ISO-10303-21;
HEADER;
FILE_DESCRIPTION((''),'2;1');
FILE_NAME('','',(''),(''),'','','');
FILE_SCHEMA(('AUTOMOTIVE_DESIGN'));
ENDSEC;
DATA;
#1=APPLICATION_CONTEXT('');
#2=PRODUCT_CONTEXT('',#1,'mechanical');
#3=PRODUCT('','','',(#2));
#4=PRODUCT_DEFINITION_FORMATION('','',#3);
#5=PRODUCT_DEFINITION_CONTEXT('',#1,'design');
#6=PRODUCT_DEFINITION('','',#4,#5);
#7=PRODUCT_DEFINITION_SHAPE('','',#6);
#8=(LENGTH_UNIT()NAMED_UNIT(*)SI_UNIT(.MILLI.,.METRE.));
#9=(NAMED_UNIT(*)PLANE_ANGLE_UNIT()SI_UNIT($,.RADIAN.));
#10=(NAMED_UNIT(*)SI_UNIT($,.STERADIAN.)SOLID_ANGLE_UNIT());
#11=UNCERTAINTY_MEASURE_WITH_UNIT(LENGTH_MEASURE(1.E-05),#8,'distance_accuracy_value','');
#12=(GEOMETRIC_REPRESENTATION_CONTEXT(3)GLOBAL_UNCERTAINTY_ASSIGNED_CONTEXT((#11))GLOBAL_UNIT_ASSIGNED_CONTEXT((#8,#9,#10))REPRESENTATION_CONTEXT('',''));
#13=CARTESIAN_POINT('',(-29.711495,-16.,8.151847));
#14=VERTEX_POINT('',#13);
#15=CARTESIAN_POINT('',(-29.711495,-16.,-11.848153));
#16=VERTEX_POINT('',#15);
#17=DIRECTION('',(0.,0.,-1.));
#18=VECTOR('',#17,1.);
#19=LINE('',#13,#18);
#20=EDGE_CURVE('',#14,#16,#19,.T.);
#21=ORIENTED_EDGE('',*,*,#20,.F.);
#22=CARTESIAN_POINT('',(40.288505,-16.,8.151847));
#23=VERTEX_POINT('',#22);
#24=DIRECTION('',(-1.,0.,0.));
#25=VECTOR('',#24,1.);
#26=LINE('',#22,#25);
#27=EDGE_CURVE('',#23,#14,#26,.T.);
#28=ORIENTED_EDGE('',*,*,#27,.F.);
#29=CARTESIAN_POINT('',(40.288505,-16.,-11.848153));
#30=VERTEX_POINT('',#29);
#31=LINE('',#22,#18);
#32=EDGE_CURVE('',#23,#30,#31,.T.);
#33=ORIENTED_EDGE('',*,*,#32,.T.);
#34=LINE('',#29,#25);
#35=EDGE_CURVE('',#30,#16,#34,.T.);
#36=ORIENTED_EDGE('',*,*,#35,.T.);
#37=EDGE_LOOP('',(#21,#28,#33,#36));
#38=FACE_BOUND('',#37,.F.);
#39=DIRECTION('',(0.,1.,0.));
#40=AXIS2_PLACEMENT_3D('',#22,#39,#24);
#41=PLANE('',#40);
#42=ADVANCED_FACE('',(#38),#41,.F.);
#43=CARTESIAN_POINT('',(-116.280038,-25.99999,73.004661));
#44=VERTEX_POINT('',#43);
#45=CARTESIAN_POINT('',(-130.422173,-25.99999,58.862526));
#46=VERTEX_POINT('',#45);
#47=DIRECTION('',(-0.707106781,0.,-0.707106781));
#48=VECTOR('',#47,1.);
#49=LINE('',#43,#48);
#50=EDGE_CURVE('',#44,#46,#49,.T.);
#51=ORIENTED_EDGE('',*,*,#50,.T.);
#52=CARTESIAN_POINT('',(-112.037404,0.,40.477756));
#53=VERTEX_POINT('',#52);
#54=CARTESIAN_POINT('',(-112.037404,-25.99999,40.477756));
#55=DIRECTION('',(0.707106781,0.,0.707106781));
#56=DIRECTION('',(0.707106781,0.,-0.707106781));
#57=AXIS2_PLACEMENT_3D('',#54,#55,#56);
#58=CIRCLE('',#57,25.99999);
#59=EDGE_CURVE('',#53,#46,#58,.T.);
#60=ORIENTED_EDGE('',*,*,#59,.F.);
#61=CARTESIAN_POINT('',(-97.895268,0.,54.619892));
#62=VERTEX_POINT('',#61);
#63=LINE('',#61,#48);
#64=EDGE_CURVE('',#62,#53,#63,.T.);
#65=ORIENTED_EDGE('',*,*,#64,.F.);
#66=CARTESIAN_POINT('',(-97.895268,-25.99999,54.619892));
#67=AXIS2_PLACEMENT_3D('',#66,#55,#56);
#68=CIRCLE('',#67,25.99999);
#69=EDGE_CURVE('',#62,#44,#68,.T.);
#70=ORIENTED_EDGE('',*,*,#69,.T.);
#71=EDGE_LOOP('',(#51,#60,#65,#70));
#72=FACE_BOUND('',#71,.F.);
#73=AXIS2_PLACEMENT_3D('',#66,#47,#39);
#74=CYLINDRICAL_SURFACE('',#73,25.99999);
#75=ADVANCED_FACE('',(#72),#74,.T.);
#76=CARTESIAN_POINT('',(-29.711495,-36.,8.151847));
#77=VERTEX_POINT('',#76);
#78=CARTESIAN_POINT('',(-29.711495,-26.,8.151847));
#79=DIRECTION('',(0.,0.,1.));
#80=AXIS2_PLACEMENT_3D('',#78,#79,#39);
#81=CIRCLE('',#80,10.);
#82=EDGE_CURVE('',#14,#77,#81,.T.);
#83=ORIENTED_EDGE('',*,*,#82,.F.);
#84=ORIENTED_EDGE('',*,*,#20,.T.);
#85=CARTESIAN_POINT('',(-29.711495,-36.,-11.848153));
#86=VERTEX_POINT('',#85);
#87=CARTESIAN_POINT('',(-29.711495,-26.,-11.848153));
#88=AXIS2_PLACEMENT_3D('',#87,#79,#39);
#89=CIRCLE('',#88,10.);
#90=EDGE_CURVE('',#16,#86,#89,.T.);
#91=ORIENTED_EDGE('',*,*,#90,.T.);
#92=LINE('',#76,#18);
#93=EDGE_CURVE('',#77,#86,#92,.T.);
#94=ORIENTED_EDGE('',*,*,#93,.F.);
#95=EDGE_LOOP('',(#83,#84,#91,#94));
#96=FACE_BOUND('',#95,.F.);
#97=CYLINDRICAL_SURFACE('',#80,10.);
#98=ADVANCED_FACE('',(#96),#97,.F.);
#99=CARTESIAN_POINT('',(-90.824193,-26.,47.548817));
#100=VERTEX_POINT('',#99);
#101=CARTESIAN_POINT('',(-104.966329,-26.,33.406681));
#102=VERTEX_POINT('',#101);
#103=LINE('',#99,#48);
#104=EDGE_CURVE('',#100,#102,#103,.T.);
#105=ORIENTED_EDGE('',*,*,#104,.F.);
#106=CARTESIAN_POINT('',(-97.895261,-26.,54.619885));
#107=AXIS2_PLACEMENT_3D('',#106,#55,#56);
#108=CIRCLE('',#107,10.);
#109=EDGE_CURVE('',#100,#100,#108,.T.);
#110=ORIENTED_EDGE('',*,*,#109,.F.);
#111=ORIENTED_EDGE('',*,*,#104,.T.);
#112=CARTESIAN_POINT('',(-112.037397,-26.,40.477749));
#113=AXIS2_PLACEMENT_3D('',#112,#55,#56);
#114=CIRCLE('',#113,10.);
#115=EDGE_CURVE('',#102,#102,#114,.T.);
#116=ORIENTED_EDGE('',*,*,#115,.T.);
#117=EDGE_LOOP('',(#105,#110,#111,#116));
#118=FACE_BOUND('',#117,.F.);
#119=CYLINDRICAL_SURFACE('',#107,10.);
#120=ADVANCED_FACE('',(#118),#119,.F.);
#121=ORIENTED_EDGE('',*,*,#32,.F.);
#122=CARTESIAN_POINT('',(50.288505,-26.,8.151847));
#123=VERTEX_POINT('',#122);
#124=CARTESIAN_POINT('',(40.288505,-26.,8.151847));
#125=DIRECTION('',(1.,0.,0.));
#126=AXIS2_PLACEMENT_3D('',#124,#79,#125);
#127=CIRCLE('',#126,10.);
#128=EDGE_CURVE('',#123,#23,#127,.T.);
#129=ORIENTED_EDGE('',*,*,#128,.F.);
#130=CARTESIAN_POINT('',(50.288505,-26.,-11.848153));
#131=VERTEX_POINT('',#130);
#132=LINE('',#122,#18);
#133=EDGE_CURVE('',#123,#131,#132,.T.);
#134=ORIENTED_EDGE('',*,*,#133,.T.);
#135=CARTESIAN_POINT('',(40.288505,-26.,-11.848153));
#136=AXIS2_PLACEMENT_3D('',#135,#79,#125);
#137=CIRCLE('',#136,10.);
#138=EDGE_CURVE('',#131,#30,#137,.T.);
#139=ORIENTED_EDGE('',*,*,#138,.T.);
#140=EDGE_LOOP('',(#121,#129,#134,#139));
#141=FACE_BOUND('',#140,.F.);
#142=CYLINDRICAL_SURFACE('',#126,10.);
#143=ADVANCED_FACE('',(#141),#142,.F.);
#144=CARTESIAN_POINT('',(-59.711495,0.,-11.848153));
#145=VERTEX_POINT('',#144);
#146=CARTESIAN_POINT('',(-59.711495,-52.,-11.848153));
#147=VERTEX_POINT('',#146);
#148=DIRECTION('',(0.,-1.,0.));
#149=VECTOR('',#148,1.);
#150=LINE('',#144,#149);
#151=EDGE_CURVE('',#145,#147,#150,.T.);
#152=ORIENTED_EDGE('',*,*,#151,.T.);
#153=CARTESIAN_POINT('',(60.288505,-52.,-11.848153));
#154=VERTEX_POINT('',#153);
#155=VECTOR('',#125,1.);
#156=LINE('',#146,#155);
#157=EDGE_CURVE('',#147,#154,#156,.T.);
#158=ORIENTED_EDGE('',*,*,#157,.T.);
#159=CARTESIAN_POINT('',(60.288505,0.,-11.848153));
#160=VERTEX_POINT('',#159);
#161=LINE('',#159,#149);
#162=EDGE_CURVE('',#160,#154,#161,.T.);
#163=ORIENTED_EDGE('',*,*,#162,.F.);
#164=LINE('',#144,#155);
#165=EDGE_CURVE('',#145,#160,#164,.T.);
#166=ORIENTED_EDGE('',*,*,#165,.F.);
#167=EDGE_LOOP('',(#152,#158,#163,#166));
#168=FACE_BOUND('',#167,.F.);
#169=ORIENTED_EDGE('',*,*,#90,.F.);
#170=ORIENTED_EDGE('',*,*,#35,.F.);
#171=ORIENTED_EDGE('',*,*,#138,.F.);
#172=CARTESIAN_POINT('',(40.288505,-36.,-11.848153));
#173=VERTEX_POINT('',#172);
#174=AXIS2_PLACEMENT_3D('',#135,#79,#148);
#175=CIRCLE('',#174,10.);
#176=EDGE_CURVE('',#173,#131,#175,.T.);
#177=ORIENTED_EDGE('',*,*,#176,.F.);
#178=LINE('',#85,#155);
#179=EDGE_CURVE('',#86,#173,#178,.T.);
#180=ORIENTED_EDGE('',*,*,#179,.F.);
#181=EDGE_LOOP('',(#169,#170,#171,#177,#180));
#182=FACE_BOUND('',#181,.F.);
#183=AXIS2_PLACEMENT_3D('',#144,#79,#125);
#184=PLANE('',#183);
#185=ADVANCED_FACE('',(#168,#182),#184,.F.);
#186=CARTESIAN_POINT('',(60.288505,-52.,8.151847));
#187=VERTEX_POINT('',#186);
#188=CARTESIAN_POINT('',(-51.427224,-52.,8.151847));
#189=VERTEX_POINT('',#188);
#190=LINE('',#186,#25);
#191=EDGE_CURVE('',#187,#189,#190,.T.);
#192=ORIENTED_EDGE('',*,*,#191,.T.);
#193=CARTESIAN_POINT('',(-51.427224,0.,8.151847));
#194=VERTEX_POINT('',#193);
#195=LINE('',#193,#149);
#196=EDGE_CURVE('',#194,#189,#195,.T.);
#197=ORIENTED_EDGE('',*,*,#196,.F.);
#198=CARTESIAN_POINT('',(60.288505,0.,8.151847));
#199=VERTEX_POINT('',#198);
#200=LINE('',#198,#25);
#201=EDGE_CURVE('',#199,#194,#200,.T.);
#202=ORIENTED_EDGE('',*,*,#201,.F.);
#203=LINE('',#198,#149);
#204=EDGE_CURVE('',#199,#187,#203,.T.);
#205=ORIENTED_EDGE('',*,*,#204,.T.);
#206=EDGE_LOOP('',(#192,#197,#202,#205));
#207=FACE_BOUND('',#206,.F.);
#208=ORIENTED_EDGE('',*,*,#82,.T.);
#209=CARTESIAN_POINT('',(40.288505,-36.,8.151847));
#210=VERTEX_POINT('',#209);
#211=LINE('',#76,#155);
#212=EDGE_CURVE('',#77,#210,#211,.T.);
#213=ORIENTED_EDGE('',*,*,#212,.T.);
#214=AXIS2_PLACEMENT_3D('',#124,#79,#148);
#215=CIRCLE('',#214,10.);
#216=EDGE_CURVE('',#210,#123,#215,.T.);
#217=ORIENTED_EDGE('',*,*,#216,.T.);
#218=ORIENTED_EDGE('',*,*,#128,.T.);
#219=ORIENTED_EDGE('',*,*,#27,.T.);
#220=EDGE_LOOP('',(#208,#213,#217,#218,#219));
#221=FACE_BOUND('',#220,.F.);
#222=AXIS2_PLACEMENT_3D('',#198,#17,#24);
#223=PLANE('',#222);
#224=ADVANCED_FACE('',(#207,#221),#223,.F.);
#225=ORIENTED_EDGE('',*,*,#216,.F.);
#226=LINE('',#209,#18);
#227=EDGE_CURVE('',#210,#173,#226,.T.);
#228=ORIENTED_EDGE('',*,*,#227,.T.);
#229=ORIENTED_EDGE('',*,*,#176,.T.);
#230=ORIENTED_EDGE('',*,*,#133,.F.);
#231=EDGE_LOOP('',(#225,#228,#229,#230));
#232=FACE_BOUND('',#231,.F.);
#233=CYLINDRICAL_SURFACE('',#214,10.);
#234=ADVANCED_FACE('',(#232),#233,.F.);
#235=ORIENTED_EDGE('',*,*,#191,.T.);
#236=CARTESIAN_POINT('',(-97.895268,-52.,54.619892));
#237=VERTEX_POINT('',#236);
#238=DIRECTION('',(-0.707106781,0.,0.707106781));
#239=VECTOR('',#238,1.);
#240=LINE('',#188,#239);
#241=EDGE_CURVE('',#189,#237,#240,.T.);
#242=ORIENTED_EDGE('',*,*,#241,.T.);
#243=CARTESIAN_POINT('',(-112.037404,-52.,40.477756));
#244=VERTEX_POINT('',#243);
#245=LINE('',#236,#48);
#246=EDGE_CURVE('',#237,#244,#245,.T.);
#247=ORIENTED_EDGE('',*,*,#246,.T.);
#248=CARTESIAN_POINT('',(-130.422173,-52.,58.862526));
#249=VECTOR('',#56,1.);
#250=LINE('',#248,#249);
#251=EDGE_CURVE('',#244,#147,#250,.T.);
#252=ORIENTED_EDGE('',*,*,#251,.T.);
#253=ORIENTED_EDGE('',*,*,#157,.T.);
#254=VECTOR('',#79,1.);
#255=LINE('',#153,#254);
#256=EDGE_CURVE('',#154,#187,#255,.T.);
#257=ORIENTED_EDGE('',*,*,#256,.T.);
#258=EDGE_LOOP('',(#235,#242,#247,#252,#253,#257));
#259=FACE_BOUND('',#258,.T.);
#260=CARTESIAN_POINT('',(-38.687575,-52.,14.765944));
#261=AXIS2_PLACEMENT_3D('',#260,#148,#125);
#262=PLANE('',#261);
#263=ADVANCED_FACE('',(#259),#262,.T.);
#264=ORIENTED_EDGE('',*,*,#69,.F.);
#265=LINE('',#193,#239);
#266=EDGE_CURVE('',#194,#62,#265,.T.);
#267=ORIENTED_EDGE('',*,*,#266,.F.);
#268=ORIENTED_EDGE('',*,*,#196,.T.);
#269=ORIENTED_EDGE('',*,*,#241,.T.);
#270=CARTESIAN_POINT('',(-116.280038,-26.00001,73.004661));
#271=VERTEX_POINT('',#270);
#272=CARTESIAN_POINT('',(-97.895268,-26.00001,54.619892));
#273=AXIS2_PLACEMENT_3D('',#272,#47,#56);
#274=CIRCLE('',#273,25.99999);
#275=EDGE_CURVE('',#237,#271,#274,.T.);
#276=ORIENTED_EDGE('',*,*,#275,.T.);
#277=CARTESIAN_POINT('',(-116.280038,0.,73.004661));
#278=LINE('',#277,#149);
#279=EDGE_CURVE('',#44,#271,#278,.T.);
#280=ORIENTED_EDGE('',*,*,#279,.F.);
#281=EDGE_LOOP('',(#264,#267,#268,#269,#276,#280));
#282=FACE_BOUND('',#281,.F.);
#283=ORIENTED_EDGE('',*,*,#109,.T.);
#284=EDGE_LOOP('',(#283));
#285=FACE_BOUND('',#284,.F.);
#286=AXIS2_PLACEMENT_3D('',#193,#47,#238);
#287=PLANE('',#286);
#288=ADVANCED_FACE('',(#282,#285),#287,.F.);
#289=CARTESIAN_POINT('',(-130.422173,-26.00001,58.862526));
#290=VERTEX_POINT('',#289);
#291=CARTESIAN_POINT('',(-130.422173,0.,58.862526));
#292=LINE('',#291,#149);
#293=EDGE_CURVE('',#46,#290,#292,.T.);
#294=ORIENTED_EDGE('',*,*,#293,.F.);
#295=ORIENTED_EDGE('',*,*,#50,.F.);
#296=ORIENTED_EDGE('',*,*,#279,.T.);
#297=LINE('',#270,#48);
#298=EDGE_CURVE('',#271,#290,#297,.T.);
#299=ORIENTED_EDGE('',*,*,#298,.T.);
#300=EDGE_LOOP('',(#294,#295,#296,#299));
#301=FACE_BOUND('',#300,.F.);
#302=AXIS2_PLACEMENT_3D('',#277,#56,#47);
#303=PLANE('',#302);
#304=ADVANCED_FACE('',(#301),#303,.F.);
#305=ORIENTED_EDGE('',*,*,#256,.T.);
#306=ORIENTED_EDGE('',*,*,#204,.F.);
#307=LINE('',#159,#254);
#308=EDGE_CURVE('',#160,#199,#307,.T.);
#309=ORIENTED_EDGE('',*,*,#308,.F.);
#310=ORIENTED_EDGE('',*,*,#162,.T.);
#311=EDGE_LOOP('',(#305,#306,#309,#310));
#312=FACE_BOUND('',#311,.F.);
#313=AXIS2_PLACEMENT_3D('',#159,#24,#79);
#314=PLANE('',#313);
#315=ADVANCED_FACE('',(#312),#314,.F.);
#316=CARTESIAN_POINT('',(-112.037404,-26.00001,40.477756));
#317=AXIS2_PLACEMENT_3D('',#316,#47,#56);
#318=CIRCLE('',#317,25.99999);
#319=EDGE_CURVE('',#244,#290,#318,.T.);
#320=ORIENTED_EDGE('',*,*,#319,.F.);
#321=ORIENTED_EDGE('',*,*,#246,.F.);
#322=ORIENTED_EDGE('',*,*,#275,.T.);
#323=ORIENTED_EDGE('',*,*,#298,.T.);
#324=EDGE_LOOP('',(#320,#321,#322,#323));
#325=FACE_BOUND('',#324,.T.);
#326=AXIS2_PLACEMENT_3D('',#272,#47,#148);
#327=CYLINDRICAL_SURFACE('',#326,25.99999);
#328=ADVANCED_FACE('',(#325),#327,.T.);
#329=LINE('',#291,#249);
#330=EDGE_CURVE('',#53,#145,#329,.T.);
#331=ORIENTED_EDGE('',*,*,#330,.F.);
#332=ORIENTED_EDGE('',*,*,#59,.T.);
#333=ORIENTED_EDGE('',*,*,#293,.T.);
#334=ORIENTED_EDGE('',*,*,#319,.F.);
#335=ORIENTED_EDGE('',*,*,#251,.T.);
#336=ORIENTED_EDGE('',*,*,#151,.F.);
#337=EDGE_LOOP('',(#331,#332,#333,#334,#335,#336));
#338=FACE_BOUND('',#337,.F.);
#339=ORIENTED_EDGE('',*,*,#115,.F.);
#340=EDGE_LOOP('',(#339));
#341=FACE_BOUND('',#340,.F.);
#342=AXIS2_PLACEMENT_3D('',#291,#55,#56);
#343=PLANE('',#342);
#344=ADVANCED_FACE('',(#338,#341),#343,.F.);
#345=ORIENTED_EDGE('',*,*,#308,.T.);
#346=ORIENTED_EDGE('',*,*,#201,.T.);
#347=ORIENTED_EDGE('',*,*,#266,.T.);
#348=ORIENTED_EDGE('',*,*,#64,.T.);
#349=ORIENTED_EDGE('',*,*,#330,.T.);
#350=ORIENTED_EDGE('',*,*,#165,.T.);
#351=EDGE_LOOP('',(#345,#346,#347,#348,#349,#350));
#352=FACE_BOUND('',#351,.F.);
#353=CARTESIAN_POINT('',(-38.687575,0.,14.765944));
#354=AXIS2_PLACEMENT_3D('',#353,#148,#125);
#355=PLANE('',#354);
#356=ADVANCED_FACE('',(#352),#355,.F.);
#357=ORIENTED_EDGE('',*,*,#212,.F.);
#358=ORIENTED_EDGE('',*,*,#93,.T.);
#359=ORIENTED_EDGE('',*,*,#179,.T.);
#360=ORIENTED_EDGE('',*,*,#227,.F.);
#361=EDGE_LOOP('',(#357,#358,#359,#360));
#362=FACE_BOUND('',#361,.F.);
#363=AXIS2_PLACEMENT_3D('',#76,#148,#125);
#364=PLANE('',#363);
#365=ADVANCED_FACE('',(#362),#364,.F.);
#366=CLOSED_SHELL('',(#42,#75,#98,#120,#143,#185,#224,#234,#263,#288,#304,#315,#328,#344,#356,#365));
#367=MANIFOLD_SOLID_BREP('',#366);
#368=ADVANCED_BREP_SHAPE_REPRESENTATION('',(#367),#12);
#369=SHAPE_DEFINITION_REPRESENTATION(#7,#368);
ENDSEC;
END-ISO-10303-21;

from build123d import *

# Parameters (mm, degrees)
F1_DEPTH = 52
F2_R     = 10
F3_DEPTH = 20
F5_DEPTH = 20
F6_R     = 25.99999


# Not quite as in the source:
# - a fillet or chamfer is up to 0.001 mm smaller than in the source, because OpenCascade refuses the exact size


with BuildPart() as f1:
    # F0 (on Front) → F1 (new body)
    with BuildSketch(Plane.XZ):
        Polygon((60.2885049582, -11.8481526151), (60.2885049582, 8.1518473849), (-51.4272237944, 8.1518473849), (-116.2800375368, 73.0046611273), (-130.4221731605, 58.8625255035), (-59.7114950418, -11.8481526151), align=None)
    extrude(amount=F1_DEPTH)

    # F2 (on face) → F3 (cut)
    with BuildSketch(Plane(origin=(-21.6376882048, 0, -21.6376882048), x_dir=(0.7071067812, 0, -0.7071067812), z_dir=(0.7071067812, 0, 0.7071067812))):
        with Locations((-107.8444940002, -26)):
            Circle(F2_R)
    extrude(amount=-F3_DEPTH, mode=Mode.SUBTRACT)

    # F4 (on face) → F5 (cut)
    with BuildSketch(Plane.XY.offset(8.1518473849)):
        with BuildLine():
            ThreePointArc((40.2885049582, -36), (47.35957277, -33.0710678119), (50.2885049582, -26))
            ThreePointArc((50.2885049582, -26), (47.35957277, -18.9289321881), (40.2885049582, -16))
            ThreePointArc((40.2885049582, -16), (30.2885049582, -26), (40.2885049582, -36))
        make_face()
        with BuildLine():
            ThreePointArc((40.2885049582, -36), (30.2885049582, -26), (40.2885049582, -16))
            Line((40.2885049582, -16), (-29.7114950418, -16))
            ThreePointArc((-29.7114950418, -16), (-22.64042723, -18.9289321881), (-19.7114950418, -26))
            ThreePointArc((-19.7114950418, -26), (-22.64042723, -33.0710678119), (-29.7114950418, -36))
            Line((-29.7114950418, -36), (40.2885049582, -36))
        make_face()
        with BuildLine():
            ThreePointArc((-19.7114950418, -26), (-22.64042723, -18.9289321881), (-29.7114950418, -16))
            ThreePointArc((-29.7114950418, -16), (-39.7114950418, -26), (-29.7114950418, -36))
            ThreePointArc((-29.7114950418, -36), (-22.64042723, -33.0710678119), (-19.7114950418, -26))
        make_face()
    extrude(amount=-F5_DEPTH, mode=Mode.SUBTRACT)

    # F6 (radius 26 in the source; OpenCascade refuses exactly that, so slightly less here)
    f6_edges = [f1.edges().sort_by_distance(p)[0] for p in [
        (-123.351105, -52, 65.933593),
        (-123.351105, 0, 65.933593),
    ]]
    fillet(f6_edges, radius=F6_R)


solid = f1.part
